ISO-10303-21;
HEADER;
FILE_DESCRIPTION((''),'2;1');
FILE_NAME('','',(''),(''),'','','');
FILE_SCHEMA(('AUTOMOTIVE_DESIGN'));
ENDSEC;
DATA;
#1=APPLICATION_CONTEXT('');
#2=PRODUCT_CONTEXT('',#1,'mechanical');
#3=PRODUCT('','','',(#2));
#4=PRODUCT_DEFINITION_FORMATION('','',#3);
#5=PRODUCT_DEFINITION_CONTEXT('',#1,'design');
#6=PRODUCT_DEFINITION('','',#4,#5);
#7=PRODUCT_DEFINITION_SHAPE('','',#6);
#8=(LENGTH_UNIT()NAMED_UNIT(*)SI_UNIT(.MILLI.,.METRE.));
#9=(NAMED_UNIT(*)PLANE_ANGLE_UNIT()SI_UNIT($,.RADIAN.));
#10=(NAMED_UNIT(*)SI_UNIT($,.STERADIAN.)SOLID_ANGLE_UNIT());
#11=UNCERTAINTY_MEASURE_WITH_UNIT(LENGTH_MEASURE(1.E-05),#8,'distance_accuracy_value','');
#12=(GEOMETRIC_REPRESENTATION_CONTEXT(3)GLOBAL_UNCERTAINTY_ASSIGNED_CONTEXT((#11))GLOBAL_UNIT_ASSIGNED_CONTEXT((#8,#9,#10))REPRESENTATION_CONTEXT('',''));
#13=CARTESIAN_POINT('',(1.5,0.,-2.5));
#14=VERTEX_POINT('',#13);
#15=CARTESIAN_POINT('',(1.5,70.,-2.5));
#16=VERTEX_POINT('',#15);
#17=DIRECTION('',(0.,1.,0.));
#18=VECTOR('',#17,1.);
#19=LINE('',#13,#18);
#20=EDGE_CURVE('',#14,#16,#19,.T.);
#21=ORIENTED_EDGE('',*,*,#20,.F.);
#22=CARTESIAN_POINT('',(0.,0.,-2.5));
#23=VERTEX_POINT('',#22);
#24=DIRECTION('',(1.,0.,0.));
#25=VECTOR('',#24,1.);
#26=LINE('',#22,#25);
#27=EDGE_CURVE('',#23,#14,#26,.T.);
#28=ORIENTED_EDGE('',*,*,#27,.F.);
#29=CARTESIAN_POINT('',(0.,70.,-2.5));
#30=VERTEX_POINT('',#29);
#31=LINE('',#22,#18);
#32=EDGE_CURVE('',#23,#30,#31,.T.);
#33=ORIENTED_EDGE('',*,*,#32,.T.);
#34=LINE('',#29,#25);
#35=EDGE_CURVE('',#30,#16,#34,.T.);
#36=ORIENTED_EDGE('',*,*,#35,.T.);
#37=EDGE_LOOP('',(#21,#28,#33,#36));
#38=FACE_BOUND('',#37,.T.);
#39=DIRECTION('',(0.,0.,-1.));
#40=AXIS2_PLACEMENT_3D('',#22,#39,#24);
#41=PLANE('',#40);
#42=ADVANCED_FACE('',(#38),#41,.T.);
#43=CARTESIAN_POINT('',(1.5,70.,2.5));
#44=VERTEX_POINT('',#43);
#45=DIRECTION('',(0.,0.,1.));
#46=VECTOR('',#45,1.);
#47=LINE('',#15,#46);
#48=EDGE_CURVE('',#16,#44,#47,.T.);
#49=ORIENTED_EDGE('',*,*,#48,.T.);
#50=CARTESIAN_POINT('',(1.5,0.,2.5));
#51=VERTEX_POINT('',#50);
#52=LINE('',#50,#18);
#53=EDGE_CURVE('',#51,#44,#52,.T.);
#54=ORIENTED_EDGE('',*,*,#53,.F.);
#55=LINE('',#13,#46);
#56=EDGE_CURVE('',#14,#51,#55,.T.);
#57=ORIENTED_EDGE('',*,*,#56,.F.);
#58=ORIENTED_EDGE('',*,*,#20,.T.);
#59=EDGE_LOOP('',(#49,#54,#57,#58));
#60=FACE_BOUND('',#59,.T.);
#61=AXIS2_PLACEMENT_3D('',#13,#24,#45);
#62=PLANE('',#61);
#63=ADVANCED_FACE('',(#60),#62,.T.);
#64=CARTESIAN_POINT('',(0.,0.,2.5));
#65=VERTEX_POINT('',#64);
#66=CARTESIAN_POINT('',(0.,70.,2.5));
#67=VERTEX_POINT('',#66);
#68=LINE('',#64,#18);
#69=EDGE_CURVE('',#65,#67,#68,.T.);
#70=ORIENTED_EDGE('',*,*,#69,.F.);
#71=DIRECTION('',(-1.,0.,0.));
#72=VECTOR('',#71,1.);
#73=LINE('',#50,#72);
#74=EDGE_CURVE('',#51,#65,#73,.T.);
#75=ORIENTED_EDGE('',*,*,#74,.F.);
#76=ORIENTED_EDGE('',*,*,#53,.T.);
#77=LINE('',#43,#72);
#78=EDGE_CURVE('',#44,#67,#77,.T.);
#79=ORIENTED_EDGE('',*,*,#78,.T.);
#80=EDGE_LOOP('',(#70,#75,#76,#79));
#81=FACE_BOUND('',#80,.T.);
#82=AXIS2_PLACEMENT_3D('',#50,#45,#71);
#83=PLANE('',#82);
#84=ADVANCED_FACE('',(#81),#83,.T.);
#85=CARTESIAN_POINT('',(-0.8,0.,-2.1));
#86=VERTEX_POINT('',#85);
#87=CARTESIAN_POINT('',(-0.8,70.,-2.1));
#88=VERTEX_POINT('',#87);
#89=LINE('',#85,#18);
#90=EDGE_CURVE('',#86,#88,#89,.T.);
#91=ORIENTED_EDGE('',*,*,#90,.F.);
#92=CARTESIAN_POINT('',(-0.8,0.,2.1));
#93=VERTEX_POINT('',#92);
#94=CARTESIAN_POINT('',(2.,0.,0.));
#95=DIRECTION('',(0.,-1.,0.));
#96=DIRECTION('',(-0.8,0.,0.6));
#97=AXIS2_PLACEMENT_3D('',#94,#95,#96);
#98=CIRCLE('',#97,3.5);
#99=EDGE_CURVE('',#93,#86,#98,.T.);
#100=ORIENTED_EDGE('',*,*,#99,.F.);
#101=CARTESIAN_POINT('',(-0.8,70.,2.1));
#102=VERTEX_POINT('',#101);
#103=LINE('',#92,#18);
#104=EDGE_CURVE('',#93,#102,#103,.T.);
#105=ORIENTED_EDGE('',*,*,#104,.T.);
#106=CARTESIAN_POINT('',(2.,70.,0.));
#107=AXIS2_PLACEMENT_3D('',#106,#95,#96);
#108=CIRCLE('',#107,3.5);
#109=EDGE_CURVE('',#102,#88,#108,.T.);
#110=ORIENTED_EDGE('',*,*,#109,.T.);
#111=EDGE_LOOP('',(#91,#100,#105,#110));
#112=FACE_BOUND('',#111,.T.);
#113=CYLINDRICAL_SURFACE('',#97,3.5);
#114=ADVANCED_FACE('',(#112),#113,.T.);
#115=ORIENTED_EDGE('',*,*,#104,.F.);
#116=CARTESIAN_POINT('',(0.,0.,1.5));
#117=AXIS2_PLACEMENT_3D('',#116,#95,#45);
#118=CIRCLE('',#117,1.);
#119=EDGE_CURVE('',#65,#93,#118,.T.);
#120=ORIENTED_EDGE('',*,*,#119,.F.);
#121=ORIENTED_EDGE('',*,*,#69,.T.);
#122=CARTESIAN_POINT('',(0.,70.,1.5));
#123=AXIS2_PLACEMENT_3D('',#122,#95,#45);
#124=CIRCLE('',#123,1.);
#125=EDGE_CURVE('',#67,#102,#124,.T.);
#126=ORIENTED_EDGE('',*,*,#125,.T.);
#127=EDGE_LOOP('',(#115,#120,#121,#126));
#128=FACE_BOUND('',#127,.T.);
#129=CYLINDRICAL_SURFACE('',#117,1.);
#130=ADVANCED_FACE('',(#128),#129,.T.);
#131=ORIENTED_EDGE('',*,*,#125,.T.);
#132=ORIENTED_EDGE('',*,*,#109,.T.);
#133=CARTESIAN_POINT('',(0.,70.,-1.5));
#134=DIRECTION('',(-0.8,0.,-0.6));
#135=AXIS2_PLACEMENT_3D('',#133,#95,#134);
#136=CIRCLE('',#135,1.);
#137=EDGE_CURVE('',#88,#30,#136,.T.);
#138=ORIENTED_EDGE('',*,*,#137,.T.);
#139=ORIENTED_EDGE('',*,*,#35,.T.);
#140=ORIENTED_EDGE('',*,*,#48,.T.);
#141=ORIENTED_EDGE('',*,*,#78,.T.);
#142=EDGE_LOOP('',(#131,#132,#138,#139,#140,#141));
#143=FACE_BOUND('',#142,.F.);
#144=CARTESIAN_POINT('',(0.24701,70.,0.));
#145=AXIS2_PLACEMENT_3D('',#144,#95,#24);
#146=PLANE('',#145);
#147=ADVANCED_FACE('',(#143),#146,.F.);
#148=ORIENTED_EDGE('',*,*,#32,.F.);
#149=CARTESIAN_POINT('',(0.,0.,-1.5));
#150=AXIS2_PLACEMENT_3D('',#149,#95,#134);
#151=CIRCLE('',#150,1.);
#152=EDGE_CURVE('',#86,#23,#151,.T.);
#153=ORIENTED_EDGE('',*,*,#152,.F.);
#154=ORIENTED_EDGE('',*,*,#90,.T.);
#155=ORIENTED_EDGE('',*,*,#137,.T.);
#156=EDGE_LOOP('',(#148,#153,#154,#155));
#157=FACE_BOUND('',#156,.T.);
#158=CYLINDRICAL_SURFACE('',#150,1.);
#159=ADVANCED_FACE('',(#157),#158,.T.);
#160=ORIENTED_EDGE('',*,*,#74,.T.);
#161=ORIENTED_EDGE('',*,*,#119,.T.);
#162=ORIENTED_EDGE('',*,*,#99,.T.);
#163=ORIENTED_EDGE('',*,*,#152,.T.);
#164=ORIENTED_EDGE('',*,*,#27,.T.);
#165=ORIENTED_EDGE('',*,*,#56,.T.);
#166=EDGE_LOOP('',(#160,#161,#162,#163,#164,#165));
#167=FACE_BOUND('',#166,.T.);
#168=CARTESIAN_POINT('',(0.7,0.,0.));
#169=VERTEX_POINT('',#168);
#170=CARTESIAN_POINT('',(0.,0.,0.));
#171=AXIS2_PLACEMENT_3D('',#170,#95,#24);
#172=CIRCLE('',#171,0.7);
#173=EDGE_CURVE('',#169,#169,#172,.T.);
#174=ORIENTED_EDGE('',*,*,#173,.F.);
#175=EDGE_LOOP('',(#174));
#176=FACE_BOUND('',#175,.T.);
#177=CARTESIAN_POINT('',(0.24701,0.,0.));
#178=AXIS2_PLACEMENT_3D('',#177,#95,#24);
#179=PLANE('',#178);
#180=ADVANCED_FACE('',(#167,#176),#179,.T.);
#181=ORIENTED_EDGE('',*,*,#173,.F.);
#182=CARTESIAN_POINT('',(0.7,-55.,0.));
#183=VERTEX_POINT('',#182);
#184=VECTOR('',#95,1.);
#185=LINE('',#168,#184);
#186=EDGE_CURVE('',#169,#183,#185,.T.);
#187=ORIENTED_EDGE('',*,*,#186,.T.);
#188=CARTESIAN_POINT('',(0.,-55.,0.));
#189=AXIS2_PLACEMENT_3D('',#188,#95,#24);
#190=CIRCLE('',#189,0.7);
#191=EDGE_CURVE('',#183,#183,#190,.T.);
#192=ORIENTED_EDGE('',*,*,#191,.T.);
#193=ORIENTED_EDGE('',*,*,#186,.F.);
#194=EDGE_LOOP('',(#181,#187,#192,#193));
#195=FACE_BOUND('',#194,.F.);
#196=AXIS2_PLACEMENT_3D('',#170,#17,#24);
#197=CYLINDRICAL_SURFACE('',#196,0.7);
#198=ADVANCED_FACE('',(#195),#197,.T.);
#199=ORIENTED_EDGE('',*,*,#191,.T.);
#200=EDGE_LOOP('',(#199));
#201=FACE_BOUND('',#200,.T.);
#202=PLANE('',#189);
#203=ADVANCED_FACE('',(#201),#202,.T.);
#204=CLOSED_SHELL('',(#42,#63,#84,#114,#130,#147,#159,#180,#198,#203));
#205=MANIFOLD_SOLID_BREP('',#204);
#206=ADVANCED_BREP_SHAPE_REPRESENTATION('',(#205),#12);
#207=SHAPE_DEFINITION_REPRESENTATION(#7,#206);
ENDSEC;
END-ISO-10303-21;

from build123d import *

# Parameters (mm, degrees)
F0_R     = 0.7
F1_DEPTH = 55
F3_DEPTH = 70


# Not quite as in the source:
# - a feature of the source that left no trace in its solid (it failed there, or was rolled back) is left out


with BuildPart() as f1:
    # F0 (on Front) → F1 (new body)
    with BuildSketch(Plane.XZ):
        Circle(F0_R)
    extrude(amount=F1_DEPTH)

    # F2 (on Front) → F3 (join)
    with BuildSketch(Plane.XZ):
        with BuildLine():
            Line((1.5, -2.5), (1.5, 2.5))
            Line((1.5, 2.5), (0, 2.5))
            ThreePointArc((0, 2.5), (-0.4472135955, 2.394427191), (-0.8, 2.1))
            ThreePointArc((-0.8, 2.1), (-1.5, 0), (-0.8, -2.1))
            ThreePointArc((-0.8, -2.1), (-0.4472135955, -2.394427191), (0, -2.5))
            Line((0, -2.5), (1.5, -2.5))
        make_face()
    extrude(amount=-F3_DEPTH)


solid = f1.part
